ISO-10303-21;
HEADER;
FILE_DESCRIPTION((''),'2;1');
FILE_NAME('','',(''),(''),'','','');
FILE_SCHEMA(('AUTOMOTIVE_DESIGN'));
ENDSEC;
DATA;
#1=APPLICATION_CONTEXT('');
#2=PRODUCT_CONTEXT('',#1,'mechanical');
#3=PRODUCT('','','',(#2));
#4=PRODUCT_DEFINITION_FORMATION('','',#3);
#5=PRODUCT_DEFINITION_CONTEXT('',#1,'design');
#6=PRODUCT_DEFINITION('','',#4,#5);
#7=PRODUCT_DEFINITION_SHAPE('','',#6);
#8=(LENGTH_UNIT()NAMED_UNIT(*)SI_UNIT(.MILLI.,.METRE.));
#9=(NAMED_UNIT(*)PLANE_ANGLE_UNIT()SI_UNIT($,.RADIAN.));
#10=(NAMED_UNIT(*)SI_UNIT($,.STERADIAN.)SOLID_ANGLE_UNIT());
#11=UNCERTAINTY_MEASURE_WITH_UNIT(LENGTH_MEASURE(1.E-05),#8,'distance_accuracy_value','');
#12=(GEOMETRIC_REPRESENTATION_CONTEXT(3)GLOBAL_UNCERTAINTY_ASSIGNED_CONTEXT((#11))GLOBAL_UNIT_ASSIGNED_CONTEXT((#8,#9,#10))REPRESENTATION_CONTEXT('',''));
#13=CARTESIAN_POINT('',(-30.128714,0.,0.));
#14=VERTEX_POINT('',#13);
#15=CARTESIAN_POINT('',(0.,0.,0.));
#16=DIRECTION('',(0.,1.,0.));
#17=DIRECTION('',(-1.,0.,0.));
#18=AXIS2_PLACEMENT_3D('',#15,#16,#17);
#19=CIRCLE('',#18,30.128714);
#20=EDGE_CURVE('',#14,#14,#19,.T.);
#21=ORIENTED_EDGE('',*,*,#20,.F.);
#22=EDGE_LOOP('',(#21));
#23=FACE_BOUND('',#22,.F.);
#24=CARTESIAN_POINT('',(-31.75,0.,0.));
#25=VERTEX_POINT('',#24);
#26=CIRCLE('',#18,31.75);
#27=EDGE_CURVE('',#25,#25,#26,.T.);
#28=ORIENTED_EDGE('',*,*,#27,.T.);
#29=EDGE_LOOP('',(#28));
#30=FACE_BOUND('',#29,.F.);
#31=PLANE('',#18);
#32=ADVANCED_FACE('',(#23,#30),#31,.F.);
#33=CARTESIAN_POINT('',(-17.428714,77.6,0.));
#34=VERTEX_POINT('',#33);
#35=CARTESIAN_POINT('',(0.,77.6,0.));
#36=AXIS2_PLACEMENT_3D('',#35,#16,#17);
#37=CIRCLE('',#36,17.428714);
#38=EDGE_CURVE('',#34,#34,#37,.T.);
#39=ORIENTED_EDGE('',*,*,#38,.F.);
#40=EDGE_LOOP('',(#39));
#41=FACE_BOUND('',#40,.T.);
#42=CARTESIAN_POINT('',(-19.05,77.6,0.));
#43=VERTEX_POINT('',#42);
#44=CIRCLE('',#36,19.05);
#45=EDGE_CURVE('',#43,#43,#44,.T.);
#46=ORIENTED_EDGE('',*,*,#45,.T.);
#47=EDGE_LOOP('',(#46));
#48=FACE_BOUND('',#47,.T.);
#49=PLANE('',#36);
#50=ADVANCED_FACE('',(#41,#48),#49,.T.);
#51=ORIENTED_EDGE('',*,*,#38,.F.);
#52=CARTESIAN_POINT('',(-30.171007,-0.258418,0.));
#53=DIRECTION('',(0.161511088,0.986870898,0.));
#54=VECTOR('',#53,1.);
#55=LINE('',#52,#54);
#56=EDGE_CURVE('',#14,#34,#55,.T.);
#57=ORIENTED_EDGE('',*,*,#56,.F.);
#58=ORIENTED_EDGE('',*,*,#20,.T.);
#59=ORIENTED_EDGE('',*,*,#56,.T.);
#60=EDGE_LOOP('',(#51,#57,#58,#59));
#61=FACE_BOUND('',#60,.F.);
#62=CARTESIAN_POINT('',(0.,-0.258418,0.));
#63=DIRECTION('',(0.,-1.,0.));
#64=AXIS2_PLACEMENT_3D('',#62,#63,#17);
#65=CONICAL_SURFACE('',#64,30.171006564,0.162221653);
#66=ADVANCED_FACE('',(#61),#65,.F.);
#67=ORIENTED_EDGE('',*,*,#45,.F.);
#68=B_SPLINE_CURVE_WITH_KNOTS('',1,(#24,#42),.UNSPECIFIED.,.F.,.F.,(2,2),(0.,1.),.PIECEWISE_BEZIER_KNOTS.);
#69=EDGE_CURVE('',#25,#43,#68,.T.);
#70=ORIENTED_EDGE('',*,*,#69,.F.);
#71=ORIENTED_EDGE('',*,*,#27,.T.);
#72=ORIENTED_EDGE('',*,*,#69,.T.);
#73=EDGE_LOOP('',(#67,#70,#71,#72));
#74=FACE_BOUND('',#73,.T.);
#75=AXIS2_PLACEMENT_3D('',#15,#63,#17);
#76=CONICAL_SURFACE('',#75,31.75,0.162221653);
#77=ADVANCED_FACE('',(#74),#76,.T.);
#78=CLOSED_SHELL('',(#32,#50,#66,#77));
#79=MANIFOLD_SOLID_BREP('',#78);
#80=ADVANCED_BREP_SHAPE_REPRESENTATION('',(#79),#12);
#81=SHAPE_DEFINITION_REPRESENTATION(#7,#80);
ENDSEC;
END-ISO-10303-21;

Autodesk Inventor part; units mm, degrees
ref_plane "YZ Plane" through (0, 0, 0) normal (1, 0, 0) x (0, 1, 0)
ref_plane "XY Plane" through (0, 0, 0) normal (0, 0, 1) x (1, 0, 0)
sketch "Szkic6" plane through (0, 0, 0) normal (0, 1, 0) x (-1, 0, 0)
  circle A0 centre (0, 0) radius 31.75
  dimension "d33" = 63.5
ref_plane "Płaszczyzna konstrukcyjna1" through (0, 77.6, 0) normal (0, 1, 0) x (-1, 0, 0)
sketch "Szkic7" plane through (0, 77.6, 0) normal (0, 1, 0) x (-1, 0, 0)
  circle A0 centre (0, 0) radius 19.05
  dimension "d35" = 38.1
loft "Wyciągnięcie złożone1" add profiles "Szkic6", "Szkic7"
shell "Skorupa1" thickness 1.6 removed faces 2 at (5.6226, 77.6, 0.0883) at (14.3997, 0, 5.5289)
equation "\"d33\" = OD1"
equation "\"d35\" = OD2"
equation "\"d52\" = THK"
equation "\"SzerokośćGięciaPodcięcia\" = Grubość"
equation "\"RozmiarPodcięciaNarożnika\" = 4 * Grubość"
equation "\"PromieńPrzejścia\" = PromieńGięcia"
equation "\"Rozmiar_promienia_Jacobiego\" = PromieńGięcia"
equation "\"Wielk_odstępu\" = Grubość"
equation "\"d2\" = PromieńGięcia"
equation "\"d23\" = PromieńGięcia"
equation "\"OD1\" = 63.5"
equation "\"OD2\" = 38.1"
equation "\"L\" = 77.6"
equation "\"THK\" = 1.6"
equation "\"d34\" = L"
equation "\"Grubość\" = 1.5"
equation "\"PromieńGięcia\" = 3"
properties part number "Redukcja symetryczna Ø63,5x38,1x1,6 L=77,6" material "304"
